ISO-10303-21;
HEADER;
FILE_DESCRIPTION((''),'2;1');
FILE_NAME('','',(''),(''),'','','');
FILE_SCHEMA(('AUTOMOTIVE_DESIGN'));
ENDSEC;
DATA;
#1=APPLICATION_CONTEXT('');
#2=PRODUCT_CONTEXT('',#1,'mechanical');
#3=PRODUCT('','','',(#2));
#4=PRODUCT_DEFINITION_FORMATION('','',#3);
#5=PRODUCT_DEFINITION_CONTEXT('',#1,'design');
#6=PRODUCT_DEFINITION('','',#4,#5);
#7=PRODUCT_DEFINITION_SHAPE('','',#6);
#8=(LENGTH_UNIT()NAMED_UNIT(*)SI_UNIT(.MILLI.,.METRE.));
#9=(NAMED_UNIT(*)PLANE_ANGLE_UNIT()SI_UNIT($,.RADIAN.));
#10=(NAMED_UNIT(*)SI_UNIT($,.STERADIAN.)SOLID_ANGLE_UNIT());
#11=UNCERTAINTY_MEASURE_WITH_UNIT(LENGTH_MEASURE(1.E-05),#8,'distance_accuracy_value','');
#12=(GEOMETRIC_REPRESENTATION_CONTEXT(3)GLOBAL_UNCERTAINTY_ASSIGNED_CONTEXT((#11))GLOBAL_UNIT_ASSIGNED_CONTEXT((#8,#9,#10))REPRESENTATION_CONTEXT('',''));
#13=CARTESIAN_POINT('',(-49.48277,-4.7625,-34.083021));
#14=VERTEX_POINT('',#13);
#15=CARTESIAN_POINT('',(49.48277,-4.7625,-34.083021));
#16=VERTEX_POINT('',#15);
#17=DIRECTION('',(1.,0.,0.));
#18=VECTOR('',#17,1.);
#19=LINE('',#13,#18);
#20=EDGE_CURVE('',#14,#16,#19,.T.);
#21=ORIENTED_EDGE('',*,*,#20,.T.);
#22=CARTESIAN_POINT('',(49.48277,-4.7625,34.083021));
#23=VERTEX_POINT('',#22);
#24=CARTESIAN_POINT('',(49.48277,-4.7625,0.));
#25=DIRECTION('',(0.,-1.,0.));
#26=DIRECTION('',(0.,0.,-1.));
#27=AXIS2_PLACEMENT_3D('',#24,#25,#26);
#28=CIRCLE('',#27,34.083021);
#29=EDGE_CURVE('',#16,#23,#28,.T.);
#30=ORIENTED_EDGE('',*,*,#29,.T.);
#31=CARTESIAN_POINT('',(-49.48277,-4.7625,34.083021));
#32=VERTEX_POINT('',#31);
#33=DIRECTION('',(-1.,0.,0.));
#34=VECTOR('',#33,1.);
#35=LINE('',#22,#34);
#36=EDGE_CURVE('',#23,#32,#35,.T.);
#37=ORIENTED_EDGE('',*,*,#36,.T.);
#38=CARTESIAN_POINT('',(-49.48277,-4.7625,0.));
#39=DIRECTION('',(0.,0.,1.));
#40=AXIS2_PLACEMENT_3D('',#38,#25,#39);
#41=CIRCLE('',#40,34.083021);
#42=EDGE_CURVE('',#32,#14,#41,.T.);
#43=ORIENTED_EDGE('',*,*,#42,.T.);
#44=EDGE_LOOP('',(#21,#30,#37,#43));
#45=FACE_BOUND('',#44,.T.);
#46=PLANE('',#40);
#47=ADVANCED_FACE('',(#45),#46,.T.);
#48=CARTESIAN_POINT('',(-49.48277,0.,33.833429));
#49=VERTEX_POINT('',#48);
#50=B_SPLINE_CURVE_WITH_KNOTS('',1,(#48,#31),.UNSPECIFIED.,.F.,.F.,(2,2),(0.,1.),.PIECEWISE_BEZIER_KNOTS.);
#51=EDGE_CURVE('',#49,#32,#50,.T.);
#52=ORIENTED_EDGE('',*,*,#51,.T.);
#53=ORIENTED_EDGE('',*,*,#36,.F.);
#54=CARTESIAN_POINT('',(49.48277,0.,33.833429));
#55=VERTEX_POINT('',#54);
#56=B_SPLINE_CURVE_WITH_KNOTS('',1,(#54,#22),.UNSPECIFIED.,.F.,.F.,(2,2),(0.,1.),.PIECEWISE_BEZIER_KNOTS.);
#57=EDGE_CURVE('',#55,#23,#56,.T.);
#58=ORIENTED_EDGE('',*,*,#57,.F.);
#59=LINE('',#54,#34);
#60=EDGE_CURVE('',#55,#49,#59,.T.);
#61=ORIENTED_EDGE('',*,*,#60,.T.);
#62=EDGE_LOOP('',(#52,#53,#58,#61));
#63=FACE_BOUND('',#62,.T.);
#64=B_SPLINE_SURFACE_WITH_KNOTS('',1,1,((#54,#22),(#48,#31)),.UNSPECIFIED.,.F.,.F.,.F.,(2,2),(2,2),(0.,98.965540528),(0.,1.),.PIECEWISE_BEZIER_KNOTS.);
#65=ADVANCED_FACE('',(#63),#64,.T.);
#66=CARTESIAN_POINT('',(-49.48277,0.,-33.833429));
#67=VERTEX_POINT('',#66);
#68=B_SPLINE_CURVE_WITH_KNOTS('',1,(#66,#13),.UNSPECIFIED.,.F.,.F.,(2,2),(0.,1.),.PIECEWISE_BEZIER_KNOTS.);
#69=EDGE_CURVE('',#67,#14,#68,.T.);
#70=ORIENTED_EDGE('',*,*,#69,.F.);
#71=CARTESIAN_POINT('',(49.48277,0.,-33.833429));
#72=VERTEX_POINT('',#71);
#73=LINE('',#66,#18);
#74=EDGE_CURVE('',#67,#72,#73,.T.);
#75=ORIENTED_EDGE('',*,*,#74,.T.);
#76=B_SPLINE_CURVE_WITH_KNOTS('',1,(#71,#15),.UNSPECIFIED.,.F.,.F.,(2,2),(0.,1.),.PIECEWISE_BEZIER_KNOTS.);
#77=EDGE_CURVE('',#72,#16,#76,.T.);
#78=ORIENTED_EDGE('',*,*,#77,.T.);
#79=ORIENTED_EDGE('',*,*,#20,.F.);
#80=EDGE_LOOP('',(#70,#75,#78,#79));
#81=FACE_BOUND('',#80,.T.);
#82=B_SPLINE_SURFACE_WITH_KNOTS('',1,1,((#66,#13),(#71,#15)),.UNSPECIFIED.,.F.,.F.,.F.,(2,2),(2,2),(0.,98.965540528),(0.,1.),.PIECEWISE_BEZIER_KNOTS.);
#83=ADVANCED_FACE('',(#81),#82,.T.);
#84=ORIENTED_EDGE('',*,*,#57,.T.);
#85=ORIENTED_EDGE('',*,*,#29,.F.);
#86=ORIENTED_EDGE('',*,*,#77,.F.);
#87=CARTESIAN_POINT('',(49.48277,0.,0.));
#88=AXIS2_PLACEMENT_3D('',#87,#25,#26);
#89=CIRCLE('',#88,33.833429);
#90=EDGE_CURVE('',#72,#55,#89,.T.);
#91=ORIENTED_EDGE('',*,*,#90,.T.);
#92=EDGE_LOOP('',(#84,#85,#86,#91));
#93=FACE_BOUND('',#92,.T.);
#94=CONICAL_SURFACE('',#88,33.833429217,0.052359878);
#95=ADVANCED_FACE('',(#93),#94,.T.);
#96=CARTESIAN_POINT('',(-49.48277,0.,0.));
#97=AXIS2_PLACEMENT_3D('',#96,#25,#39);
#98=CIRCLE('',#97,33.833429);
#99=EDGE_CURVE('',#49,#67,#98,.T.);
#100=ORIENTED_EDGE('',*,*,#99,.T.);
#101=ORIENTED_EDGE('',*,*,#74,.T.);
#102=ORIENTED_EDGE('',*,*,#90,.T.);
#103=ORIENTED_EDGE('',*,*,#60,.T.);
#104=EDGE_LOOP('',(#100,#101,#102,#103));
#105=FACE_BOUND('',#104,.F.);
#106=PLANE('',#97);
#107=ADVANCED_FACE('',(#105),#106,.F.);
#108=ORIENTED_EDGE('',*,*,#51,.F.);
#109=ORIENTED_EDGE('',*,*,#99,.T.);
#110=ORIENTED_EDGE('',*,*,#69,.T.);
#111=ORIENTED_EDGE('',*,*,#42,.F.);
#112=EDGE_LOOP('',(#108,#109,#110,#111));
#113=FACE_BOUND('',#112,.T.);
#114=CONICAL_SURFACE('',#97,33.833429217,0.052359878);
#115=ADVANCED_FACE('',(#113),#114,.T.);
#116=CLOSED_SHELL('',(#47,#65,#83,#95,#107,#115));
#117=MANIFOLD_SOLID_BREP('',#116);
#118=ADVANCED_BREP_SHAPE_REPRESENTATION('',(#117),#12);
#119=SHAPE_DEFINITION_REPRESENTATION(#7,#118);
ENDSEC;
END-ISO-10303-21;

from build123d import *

# Parameters (mm, degrees)
F1_DEPTH = 4.7625
F1_TAPER = -3


# Not quite as in the source:
# - a length typed as a fraction of an inch, garbled in the dataset ("3 / 203.2 mm" for 3/8 in), is restored


with BuildPart() as f1:
    # F0 (on Front) → F1 (new body)
    with BuildSketch(Plane.XZ):
        with BuildLine():
            Line((0, 33.8334292173), (-49.4827702641, 33.8334292173))
            ThreePointArc((-49.4827702641, 33.8334292173), (-83.3161994815, 0), (-49.4827702641, -33.8334292173))
            Line((-49.4827702641, -33.8334292173), (0, -33.8334292173))
            Line((0, -33.8334292173), (49.4827702641, -33.8334292173))
            ThreePointArc((49.4827702641, -33.8334292173), (83.3161994815, 0), (49.4827702641, 33.8334292173))
            Line((49.4827702641, 33.8334292173), (0, 33.8334292173))
        make_face()
    extrude(amount=F1_DEPTH, taper=F1_TAPER)


solid = f1.part
